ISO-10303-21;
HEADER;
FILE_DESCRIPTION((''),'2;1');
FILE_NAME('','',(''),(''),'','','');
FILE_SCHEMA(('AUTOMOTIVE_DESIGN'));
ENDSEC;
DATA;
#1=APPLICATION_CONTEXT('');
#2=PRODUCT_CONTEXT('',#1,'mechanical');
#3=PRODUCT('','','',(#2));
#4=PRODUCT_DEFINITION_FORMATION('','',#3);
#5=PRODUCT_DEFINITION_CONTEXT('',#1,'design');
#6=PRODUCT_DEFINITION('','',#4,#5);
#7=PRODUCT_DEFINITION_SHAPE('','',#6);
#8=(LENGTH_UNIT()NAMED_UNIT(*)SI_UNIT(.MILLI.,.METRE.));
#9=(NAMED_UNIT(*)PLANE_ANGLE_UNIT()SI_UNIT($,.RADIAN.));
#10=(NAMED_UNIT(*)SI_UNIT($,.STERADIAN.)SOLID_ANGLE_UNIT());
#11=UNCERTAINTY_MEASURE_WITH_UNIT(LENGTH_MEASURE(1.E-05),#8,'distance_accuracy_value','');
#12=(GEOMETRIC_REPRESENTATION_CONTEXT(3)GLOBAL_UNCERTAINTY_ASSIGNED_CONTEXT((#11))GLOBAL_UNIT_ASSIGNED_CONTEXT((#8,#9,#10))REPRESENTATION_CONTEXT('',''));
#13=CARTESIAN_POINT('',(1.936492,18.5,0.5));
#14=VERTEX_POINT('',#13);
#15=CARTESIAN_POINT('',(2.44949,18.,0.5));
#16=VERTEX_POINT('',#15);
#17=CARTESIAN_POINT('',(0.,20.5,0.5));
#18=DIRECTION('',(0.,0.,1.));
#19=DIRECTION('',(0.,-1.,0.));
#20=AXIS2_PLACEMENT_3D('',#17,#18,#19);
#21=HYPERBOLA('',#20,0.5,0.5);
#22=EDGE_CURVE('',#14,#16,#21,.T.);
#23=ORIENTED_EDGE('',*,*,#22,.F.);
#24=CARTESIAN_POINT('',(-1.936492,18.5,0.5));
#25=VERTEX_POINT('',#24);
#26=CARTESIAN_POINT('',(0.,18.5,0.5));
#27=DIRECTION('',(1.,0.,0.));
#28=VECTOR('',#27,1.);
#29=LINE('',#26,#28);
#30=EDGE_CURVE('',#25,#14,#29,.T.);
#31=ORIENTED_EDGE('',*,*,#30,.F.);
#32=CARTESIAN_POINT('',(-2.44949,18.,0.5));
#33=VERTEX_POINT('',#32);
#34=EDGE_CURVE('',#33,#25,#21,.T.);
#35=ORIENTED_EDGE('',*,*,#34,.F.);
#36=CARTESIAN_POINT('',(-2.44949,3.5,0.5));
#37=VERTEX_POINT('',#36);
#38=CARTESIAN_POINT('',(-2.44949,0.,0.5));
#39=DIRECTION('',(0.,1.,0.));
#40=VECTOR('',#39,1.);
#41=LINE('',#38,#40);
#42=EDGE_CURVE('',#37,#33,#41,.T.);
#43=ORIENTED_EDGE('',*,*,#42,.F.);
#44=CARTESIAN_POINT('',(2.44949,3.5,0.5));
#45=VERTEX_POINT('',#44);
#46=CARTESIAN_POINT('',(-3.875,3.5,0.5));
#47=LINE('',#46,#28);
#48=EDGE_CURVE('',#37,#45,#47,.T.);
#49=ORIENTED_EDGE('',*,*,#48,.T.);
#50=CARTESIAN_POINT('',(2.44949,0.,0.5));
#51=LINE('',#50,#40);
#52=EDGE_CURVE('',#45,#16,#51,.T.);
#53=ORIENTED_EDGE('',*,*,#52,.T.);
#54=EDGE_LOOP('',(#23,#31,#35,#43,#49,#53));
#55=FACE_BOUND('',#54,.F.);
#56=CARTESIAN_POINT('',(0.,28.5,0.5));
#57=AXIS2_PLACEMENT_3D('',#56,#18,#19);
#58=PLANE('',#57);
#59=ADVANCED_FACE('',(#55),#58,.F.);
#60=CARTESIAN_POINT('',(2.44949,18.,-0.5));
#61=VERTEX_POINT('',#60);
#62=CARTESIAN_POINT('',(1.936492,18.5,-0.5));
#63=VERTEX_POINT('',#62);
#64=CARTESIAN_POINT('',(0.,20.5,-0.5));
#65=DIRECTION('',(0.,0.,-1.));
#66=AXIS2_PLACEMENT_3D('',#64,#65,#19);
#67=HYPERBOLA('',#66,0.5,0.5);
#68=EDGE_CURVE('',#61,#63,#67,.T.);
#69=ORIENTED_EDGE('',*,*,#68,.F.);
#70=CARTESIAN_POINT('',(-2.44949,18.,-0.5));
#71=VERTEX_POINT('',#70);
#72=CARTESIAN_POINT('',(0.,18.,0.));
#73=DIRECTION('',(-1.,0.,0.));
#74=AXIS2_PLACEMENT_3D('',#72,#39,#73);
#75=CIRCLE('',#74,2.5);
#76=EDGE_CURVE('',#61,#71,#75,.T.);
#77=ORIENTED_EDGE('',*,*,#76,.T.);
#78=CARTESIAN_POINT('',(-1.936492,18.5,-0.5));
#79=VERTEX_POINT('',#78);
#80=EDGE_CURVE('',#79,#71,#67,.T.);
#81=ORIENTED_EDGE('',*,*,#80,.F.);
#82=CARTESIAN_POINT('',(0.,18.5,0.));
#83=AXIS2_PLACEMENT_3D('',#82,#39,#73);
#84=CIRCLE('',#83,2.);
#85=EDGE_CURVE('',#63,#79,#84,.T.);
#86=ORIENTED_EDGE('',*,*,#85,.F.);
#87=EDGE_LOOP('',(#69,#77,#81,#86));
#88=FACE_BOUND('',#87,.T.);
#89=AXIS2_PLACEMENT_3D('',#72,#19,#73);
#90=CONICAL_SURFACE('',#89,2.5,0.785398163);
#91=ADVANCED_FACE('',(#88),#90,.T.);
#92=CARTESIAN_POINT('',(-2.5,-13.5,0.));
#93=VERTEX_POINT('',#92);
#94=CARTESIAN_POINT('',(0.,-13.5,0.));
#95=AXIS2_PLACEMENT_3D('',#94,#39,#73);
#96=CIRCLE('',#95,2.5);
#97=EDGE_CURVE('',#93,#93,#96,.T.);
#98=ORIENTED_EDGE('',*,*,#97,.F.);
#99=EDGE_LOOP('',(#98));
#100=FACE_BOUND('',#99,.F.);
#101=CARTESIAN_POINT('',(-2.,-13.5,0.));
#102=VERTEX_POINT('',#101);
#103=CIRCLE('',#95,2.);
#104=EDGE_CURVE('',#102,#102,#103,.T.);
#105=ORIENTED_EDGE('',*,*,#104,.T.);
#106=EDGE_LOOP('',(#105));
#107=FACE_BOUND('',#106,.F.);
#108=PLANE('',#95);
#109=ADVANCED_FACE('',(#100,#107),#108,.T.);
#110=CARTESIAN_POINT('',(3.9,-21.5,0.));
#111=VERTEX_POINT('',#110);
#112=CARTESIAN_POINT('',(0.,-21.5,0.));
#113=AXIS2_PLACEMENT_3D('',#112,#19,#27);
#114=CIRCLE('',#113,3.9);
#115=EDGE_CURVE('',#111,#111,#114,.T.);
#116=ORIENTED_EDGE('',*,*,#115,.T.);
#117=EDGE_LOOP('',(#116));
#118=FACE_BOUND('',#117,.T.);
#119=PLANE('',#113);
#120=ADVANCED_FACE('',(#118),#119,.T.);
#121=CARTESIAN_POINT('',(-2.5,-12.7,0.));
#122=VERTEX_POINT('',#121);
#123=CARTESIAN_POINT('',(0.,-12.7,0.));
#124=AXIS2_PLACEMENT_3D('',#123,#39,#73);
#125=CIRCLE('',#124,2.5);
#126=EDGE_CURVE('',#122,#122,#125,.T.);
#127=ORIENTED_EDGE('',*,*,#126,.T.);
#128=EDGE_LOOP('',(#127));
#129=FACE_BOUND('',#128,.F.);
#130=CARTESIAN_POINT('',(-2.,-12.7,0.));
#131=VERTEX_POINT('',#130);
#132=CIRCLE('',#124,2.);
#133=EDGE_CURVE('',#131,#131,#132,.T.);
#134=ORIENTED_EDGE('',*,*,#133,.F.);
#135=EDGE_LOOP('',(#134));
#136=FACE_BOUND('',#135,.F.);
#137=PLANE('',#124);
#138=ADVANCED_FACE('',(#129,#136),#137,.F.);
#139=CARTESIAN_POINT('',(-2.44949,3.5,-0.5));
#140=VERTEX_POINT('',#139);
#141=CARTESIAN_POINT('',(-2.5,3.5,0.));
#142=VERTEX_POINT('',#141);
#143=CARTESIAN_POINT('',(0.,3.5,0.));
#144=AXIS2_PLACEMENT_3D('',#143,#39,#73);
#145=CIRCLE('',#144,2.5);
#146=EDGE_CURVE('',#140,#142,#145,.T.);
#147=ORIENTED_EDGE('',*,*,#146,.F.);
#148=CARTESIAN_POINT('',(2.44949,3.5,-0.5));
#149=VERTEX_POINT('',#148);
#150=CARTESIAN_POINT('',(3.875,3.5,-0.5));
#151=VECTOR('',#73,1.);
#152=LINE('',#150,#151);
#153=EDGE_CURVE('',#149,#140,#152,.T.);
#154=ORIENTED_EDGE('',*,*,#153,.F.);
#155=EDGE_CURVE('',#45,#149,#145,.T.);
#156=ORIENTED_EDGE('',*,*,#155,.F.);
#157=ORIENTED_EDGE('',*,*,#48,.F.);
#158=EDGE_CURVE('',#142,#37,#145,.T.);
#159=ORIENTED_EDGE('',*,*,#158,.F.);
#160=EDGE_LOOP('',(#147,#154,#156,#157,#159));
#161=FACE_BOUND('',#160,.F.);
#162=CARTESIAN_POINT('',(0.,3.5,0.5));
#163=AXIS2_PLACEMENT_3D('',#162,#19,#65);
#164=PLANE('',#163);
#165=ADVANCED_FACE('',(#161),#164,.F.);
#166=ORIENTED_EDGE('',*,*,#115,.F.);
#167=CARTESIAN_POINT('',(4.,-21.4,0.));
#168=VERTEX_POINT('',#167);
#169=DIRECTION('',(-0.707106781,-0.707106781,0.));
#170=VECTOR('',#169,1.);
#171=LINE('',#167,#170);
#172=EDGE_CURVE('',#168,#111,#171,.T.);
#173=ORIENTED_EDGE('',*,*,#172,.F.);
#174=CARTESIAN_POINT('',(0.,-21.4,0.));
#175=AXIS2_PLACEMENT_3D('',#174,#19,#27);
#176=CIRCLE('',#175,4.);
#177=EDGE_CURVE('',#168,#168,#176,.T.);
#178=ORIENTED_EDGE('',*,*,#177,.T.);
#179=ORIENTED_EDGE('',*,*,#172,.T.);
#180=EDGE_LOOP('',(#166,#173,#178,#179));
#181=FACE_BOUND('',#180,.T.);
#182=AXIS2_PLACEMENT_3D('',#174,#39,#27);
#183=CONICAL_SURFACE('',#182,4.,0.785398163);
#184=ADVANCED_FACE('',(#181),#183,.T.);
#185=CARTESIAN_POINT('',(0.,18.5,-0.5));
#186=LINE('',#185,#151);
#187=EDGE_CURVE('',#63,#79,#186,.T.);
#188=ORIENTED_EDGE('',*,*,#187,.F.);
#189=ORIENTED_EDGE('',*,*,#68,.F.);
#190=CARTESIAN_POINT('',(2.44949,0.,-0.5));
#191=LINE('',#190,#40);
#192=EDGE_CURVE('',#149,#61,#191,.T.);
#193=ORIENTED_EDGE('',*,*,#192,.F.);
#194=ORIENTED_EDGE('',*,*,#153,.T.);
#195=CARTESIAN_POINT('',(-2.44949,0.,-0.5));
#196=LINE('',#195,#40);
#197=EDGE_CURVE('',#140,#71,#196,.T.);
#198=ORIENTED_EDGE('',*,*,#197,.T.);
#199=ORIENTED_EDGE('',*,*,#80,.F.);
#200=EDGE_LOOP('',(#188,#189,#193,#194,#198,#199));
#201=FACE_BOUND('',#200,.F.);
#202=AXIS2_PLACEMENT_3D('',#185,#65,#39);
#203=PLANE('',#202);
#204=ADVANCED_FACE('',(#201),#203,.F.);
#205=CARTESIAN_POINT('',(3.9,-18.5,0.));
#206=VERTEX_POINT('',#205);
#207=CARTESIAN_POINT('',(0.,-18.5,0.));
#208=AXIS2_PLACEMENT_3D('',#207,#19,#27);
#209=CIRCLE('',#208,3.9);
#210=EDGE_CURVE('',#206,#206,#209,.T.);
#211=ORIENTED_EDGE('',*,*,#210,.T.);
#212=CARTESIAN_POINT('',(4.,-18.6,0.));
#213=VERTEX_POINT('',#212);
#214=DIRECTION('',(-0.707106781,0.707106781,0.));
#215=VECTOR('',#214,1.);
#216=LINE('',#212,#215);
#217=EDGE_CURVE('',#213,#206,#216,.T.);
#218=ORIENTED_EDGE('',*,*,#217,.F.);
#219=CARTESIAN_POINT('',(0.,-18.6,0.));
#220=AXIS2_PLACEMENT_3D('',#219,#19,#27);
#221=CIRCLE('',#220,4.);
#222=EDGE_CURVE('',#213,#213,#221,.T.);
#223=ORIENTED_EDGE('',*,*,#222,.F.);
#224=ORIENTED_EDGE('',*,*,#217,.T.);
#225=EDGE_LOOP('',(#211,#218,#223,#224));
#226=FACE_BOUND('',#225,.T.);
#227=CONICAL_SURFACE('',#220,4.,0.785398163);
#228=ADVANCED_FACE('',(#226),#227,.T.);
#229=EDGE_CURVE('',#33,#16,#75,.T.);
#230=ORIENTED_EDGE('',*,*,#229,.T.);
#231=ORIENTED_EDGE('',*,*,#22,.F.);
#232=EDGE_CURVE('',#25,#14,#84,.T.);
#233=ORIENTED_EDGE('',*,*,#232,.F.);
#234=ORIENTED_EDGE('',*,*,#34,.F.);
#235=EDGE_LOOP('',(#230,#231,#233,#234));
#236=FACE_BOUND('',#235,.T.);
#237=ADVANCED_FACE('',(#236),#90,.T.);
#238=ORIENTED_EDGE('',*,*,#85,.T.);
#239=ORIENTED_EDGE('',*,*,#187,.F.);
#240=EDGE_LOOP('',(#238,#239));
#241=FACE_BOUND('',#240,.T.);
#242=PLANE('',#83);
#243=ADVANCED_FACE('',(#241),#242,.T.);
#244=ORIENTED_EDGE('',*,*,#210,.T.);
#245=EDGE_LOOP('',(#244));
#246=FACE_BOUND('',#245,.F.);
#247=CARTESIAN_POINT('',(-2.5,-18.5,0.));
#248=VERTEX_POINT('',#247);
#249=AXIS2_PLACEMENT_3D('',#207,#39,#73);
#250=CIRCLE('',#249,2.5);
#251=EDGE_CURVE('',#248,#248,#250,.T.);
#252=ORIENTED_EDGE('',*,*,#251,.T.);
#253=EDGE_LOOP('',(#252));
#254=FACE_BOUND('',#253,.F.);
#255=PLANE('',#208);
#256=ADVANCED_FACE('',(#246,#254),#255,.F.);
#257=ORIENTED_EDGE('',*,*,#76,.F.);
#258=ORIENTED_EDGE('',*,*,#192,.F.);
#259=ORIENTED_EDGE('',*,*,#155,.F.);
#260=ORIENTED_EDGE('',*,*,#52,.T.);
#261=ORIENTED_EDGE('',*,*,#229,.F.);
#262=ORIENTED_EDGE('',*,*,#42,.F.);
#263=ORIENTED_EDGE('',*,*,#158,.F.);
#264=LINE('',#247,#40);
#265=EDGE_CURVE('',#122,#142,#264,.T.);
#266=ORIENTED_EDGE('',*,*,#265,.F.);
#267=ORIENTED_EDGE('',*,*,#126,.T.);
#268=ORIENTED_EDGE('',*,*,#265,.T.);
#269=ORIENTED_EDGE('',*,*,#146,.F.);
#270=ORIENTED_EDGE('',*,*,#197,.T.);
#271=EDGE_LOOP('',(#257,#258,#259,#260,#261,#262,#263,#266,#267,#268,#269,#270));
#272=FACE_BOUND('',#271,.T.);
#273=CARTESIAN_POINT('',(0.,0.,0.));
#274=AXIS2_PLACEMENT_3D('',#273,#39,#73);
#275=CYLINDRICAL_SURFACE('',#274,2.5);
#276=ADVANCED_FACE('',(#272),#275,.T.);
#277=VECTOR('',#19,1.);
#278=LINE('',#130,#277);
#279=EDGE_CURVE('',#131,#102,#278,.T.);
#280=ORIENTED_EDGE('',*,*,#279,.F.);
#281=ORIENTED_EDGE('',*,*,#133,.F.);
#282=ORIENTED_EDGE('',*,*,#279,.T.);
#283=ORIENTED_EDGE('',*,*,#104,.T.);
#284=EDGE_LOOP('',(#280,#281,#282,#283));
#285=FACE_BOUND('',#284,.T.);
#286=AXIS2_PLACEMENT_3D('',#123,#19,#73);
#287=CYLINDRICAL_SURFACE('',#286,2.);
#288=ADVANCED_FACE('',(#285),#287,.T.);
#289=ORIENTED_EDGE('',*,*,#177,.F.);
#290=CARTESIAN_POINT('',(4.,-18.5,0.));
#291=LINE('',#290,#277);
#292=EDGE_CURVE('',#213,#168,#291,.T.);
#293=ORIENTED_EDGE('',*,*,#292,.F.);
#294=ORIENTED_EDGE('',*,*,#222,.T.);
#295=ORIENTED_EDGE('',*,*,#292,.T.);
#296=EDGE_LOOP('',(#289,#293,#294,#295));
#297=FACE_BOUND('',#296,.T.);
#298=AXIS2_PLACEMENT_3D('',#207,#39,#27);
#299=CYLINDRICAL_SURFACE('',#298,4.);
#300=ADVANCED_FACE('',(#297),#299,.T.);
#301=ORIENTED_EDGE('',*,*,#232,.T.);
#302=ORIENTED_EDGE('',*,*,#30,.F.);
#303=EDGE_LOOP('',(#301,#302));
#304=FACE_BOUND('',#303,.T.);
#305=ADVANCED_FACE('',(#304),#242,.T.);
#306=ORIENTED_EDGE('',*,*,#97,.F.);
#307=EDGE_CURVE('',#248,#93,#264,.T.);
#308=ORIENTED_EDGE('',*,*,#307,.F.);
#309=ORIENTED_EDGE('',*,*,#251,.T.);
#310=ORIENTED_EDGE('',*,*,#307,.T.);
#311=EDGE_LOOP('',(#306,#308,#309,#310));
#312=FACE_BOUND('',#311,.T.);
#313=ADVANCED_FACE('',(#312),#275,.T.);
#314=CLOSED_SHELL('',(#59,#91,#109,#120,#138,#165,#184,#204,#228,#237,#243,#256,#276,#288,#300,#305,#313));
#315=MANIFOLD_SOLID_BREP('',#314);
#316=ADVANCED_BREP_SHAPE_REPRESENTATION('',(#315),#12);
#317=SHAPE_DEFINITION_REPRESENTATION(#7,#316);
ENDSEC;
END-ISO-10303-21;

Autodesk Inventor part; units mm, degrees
ref_plane "YZ Plane" through (0, 0, 0) normal (1, 0, 0) x (0, 1, 0)
ref_plane "XZ Plane" through (0, 0, 0) normal (0, 1, 0) x (-1, 0, 0)
ref_plane "XY Plane" through (0, 0, 0) normal (0, 0, 1) x (1, 0, 0)
sketch "Sketch4" plane through (0, 0, 0) normal (0, 1, 0) x (-1, 0, 0)
  circle A0 centre (0, 0) radius 2.5
extrude "Extrusion2" add sketch "Sketch4" along normal mid plane 37
chamfer "Chamfer1" distance 0.5 angle 45 1 edges at (2.5, 18.5, 0)
sketch "Sketch14" plane through (0, -18.5, 0) normal (0, -1, 0) x (1, 0, 0)
  circle A0 centre (0, 0) radius 4
  dimension "d101" = 8
extrude "Extrusion10" add sketch "Sketch14" along normal blind 3
sketch "Sketch15" plane through (0, 0, 0) normal (0, 0, 1) x (1, 0, 0)
  line L0 (-2.5, -18.5) -> (-2.5, 18) projected
  line L1 (-2.5, -12.7) -> (-2, -12.7)
  line L2 (-2, -12.7) -> (-2, -13.5)
  line L3 (-2, -13.5) -> (-2.5, -13.5)
  line L4 (-2.5, -13.5) -> (-2.5, -12.7)
  line L5 (0, -22.5133) -> (0, 22.052) construction
  line L6 (-4, -18.5) -> (4, -18.5) projected
  point P0 (0, 0)
  dimension "d104" = 2
  dimension "d105" = 0.8
  dimension "d106" = 5
revolve "Revolution1" cut sketch "Sketch15" angle 360 about axis through (0, -22.5133, 0) along (0, 1, 0)
chamfer "Chamfer2" distance 0.1 angle 45 2 edges at (-4, -18.5, 0) (-4, -21.5, 0)
sketch "Sketch16" plane through (0, 0, 0) normal (1, 0, 0) x (0, 1, 0)
  line L0 (28.5, 0.5) -> (3.5, 0.5)
  line L1 (3.5, 0.5) -> (3.5, -0.5)
  line L2 (3.5, -0.5) -> (28.5, -0.5)
  line L3 (28.5, -0.5) -> (28.5, 0.5)
  line L4 (28.5, 0.5) -> (3.5, -0.5) construction
  line L5 (3.5, 0.5) -> (28.5, -0.5) construction
  line L6 (18.5, 2) -> (18.5, -2) projected
  point P0 (0, 0)
  point P1 (16, 0)
  dimension "d111" = 15
  dimension "d112" = 1
  dimension "d115" = 10
extrude "Extrusion11" cut sketch "Sketch16" against normal mid plane 7.75
properties part number "Wheel Handle" material "Bronze, Soft Tin"
